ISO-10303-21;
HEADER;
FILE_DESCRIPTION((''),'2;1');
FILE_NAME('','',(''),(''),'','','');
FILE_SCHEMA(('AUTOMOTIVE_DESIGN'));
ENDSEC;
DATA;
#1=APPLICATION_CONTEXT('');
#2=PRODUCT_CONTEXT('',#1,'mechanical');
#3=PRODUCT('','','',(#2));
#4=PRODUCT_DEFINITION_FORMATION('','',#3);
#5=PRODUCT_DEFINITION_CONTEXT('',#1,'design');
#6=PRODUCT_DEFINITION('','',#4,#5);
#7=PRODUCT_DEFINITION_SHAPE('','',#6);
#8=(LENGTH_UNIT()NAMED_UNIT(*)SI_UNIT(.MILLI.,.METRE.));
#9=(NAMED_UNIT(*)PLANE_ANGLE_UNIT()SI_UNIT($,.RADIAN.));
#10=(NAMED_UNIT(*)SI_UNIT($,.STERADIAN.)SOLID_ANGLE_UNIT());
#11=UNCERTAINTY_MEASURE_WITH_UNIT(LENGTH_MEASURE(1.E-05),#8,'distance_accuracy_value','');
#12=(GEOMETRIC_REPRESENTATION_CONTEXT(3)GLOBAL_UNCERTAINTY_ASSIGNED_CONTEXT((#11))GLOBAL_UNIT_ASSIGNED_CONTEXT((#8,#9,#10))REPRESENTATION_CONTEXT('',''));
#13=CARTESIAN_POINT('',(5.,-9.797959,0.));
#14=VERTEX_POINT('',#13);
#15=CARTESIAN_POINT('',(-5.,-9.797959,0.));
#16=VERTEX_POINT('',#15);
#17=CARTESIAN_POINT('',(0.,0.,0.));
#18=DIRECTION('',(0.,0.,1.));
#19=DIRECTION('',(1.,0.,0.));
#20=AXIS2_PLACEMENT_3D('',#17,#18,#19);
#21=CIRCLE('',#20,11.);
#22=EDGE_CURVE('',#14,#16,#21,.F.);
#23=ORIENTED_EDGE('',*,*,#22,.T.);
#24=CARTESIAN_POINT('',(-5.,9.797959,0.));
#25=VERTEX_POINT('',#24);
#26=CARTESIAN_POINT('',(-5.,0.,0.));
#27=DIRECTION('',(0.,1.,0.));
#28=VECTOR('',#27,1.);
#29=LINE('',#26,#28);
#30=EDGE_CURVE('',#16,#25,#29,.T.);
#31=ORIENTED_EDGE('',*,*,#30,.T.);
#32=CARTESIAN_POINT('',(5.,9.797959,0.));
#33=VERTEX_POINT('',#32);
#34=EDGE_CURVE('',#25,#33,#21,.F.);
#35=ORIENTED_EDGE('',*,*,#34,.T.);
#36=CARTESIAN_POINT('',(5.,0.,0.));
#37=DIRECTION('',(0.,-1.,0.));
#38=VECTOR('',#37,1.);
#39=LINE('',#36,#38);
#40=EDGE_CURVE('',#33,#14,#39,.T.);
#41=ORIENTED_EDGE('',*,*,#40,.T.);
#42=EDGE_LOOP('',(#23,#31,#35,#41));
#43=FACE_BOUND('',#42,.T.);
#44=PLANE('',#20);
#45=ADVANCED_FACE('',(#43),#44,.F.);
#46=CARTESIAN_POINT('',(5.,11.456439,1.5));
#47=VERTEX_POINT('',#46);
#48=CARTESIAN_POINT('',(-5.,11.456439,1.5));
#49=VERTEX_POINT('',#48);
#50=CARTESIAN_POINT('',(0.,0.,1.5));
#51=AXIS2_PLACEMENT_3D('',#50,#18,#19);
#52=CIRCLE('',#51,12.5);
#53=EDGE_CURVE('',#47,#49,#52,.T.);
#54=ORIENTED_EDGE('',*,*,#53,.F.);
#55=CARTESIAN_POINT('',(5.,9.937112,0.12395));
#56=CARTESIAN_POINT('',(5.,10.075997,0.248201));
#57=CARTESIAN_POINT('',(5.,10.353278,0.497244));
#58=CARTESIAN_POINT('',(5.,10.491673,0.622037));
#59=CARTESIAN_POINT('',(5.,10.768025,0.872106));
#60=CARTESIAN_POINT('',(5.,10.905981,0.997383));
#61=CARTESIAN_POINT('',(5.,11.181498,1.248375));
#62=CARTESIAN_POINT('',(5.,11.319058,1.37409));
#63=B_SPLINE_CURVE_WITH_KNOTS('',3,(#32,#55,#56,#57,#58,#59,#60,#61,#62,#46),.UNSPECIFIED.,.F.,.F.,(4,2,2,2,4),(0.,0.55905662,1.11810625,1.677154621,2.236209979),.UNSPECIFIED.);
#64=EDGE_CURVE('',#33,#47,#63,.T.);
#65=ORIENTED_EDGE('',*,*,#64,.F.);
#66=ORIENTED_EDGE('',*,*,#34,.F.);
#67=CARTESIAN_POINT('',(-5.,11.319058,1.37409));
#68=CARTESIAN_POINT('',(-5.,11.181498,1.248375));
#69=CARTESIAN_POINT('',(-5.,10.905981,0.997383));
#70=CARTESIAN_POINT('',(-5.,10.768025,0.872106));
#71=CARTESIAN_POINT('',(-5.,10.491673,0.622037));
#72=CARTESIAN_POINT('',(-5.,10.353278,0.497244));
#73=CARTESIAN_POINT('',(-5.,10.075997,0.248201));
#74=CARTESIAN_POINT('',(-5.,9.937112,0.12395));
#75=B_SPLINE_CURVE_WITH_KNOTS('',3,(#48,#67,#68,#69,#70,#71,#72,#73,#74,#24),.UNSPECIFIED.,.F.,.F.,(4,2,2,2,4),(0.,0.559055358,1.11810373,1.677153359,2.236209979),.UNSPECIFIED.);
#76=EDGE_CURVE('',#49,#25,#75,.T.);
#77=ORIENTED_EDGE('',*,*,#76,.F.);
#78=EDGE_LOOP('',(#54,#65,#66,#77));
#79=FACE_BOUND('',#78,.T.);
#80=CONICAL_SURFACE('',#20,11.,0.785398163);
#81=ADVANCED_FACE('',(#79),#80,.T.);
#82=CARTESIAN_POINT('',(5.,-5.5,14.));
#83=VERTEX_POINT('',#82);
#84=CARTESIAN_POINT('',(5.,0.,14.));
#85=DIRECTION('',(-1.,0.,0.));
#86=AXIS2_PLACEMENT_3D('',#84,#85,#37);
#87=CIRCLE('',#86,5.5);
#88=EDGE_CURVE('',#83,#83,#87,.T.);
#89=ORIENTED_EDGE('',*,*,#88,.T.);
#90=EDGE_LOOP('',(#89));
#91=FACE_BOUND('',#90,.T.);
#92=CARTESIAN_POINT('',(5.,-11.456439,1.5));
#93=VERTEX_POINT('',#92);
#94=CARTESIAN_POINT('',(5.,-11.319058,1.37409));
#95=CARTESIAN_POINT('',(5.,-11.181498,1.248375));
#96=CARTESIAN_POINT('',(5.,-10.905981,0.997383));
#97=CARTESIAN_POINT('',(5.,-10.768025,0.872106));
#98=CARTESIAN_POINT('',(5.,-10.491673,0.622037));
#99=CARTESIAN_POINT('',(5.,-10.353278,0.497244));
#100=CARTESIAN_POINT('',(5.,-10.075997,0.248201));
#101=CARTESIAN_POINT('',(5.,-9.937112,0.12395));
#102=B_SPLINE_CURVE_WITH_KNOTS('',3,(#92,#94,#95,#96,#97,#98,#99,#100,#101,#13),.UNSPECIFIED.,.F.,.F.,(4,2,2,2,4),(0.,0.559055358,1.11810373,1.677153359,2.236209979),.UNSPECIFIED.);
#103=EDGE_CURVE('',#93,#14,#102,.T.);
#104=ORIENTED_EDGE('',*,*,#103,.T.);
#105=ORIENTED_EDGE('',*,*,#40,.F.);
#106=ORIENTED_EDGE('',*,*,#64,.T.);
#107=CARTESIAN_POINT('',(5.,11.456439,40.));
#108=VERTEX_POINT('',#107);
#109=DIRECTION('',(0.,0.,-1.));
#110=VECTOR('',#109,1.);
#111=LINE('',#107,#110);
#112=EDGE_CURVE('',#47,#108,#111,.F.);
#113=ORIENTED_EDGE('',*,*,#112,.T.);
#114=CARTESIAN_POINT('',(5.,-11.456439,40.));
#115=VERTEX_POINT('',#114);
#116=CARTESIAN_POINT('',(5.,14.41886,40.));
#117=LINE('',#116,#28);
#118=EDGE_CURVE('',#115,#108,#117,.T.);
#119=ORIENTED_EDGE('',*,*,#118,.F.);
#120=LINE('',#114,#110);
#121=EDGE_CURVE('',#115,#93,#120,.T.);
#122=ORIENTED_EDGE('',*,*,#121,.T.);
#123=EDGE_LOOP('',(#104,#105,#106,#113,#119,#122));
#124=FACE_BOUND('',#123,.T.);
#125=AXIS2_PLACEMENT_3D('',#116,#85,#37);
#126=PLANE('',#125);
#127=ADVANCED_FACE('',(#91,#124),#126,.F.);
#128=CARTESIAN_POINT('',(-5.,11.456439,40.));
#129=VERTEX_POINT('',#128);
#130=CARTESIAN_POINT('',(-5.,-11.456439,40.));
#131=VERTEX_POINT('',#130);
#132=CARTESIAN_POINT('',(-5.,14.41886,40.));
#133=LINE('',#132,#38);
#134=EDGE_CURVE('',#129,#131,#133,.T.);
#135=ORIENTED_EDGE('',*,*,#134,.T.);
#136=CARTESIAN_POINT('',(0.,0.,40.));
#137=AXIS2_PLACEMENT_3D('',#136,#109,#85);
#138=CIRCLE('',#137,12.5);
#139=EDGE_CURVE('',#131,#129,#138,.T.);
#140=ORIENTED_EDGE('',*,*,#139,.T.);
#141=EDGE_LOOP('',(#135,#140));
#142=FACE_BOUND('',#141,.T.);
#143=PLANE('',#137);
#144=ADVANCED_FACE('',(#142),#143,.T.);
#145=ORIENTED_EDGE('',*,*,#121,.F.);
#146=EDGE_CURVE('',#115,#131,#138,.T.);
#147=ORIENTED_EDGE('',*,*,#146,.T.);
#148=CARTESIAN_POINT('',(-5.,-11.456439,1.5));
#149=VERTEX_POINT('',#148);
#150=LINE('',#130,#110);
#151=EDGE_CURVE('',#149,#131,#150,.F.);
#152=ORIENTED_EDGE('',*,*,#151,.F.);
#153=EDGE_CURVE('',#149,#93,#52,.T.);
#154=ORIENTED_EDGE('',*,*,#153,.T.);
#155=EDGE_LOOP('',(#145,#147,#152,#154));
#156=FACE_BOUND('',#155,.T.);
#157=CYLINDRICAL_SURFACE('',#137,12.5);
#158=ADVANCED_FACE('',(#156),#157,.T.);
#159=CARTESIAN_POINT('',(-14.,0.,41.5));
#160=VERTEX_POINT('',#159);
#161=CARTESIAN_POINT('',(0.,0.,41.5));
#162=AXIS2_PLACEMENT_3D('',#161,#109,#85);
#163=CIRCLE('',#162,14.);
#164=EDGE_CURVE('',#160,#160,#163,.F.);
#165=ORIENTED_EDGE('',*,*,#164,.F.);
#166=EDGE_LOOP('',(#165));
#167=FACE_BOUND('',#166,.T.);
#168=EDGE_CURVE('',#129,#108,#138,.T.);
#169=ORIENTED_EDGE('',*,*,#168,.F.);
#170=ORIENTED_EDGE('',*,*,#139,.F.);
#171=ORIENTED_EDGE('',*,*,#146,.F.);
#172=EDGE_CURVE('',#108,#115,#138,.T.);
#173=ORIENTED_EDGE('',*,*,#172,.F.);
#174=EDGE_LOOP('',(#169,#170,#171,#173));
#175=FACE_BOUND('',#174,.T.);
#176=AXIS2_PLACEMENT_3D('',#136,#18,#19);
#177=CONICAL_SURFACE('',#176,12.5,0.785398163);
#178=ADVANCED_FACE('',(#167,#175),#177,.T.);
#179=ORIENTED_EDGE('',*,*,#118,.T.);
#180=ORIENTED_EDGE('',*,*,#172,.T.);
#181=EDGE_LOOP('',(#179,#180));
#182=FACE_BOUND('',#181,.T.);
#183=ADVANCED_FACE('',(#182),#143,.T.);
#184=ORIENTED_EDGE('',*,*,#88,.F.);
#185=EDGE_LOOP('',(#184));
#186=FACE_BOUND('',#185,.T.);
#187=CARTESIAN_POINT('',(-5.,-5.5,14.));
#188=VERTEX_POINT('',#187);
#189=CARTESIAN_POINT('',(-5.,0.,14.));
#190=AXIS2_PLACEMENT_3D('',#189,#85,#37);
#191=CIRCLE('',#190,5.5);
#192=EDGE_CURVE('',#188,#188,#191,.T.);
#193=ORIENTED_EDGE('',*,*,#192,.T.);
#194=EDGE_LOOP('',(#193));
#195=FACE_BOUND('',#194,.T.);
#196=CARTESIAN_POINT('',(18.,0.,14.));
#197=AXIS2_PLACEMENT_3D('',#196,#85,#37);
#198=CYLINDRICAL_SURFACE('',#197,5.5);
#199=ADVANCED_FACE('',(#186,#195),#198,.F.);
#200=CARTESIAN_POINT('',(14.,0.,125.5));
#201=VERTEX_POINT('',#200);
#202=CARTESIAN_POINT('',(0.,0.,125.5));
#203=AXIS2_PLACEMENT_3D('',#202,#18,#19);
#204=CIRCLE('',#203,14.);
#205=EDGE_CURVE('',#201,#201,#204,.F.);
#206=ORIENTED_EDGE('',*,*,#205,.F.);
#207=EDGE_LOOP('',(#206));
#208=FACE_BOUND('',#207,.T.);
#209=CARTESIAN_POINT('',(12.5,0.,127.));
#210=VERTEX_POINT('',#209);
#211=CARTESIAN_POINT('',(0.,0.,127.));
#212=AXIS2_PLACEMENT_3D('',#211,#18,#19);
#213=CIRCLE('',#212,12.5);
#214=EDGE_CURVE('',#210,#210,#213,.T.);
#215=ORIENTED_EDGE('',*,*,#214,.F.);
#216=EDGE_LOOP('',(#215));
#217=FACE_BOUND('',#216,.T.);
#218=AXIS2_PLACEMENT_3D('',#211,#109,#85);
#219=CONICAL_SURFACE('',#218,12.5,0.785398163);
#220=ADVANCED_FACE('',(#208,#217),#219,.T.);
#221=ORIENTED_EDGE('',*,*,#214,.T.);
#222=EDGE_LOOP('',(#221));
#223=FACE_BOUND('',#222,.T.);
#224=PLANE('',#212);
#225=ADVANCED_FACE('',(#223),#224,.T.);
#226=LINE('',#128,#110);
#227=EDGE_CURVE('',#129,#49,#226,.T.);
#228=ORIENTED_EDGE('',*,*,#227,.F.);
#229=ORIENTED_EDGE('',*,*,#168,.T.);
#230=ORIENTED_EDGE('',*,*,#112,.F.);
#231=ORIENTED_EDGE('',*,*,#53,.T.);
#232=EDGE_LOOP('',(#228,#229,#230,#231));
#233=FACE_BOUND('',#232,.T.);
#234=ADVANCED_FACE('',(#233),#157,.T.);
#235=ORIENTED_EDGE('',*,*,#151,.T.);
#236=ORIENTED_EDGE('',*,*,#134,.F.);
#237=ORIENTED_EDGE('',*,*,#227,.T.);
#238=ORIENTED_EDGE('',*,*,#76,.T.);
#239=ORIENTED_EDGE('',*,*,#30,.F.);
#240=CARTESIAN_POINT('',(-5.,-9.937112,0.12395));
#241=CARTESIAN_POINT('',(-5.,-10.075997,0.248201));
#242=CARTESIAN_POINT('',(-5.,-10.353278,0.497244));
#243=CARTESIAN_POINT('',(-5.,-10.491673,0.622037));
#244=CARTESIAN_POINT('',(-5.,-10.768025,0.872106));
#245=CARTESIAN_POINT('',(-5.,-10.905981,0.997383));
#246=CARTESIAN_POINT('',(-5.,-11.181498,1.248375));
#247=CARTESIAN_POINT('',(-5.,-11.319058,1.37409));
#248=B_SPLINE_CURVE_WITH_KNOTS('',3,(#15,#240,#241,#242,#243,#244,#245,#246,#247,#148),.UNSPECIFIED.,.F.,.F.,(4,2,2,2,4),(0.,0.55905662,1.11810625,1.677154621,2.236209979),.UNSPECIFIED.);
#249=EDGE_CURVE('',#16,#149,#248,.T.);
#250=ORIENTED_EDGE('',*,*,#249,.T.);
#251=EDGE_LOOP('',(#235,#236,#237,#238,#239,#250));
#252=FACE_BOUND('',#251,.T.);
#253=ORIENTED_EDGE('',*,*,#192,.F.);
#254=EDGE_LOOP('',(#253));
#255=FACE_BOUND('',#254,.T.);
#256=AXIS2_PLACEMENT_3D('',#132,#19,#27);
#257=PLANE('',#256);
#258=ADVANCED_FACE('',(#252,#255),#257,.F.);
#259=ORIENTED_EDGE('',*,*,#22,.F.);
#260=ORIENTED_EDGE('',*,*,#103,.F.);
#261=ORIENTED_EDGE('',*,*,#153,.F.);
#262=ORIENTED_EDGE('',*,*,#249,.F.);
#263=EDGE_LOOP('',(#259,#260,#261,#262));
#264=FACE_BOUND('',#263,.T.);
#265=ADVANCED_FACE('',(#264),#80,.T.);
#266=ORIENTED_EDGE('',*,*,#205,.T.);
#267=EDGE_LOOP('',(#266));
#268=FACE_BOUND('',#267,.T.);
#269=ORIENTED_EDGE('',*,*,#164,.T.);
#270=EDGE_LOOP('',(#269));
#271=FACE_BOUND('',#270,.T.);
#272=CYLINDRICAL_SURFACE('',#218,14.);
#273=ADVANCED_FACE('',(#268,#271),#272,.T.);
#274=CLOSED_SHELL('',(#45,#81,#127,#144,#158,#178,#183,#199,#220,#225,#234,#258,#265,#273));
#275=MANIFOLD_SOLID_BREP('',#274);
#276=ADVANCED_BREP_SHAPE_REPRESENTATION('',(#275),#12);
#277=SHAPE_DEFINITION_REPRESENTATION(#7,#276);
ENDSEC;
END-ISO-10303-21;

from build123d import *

# Parameters (mm, degrees)
ESQUISSE1_R             = 14
EXTRUSION1_DEPTH        = 127
CHANFREIN1_SIZE         = 1.5
ESQUISSE2_OUTSIDE_W     = 56.606
ESQUISSE2_OUTSIDE_H     = 56.606
ESQUISSE2_OUTSIDE_R     = 12.5
ENL_V_MAT_EXTRU_1_DEPTH = 40
ESQUISSE3_OUTSIDE_W     = 56.606
ESQUISSE3_OUTSIDE_H     = 56.606
ESQUISSE3_OUTSIDE_W_2   = 10
ESQUISSE3_OUTSIDE_H_2   = 28.179824561
ENL_V_MAT_EXTRU_2_DEPTH = 40
CHANFREIN2_SIZE         = 1.5
CHANFREIN3_SIZE         = 1.5
ESQUISSE4_R             = 5.5
ENL_V_MAT_EXTRU_3_DEPTH = 23


with BuildPart() as part:
    # Esquisse1 → Extrusion1 (new body)
    with BuildSketch(Plane.XY):
        Circle(ESQUISSE1_R)
    extrude(amount=EXTRUSION1_DEPTH)

    # Chanfrein1
    chanfrein1_edges = [part.edges().sort_by_distance(p)[0] for p in [
        (-14, 0, 127),
    ]]
    chamfer(chanfrein1_edges, length=CHANFREIN1_SIZE)

    # Esquisse2 outside → Enlèv. mat.-Extru.1 (cut)
    with BuildSketch(Plane(origin=(0, 0, 0), x_dir=(-1, 0, 0), z_dir=(0, 0, -1))):
        Rectangle(ESQUISSE2_OUTSIDE_W, ESQUISSE2_OUTSIDE_H)
        Circle(ESQUISSE2_OUTSIDE_R, mode=Mode.SUBTRACT)
    extrude(amount=-ENL_V_MAT_EXTRU_1_DEPTH, mode=Mode.SUBTRACT)

    # Esquisse3 outside → Enlèv. mat.-Extru.2 (cut)
    with BuildSketch(Plane.XY):
        Rectangle(ESQUISSE3_OUTSIDE_W, ESQUISSE3_OUTSIDE_H)
        with Locations((0, 0.328947369)):
            Rectangle(ESQUISSE3_OUTSIDE_W_2, ESQUISSE3_OUTSIDE_H_2, mode=Mode.SUBTRACT)
    extrude(amount=ENL_V_MAT_EXTRU_2_DEPTH, mode=Mode.SUBTRACT)

    # Chanfrein2
    chanfrein2_edges = [part.edges().sort_by_distance(p)[0] for p in [
        (0, 12.5, 0),
        (0, -12.5, 0),
    ]]
    chamfer(chanfrein2_edges, length=CHANFREIN2_SIZE)

    # Chanfrein3
    chanfrein3_edges = [part.edges().sort_by_distance(p)[0] for p in [
        (-14, 0, 40),
    ]]
    chamfer(chanfrein3_edges, length=CHANFREIN3_SIZE - 0.0001)  # a hair under: the kernel refuses the full size

    # Esquisse4 → Enlèv. mat.-Extru.3 (cut)
    with BuildSketch(Plane.ZY.offset(5)):
        with Locations(Location((14, 0, 0), (0, 0, 270))):
            Circle(ESQUISSE4_R)
    extrude(amount=-ENL_V_MAT_EXTRU_3_DEPTH, mode=Mode.SUBTRACT)


solid = part.part
